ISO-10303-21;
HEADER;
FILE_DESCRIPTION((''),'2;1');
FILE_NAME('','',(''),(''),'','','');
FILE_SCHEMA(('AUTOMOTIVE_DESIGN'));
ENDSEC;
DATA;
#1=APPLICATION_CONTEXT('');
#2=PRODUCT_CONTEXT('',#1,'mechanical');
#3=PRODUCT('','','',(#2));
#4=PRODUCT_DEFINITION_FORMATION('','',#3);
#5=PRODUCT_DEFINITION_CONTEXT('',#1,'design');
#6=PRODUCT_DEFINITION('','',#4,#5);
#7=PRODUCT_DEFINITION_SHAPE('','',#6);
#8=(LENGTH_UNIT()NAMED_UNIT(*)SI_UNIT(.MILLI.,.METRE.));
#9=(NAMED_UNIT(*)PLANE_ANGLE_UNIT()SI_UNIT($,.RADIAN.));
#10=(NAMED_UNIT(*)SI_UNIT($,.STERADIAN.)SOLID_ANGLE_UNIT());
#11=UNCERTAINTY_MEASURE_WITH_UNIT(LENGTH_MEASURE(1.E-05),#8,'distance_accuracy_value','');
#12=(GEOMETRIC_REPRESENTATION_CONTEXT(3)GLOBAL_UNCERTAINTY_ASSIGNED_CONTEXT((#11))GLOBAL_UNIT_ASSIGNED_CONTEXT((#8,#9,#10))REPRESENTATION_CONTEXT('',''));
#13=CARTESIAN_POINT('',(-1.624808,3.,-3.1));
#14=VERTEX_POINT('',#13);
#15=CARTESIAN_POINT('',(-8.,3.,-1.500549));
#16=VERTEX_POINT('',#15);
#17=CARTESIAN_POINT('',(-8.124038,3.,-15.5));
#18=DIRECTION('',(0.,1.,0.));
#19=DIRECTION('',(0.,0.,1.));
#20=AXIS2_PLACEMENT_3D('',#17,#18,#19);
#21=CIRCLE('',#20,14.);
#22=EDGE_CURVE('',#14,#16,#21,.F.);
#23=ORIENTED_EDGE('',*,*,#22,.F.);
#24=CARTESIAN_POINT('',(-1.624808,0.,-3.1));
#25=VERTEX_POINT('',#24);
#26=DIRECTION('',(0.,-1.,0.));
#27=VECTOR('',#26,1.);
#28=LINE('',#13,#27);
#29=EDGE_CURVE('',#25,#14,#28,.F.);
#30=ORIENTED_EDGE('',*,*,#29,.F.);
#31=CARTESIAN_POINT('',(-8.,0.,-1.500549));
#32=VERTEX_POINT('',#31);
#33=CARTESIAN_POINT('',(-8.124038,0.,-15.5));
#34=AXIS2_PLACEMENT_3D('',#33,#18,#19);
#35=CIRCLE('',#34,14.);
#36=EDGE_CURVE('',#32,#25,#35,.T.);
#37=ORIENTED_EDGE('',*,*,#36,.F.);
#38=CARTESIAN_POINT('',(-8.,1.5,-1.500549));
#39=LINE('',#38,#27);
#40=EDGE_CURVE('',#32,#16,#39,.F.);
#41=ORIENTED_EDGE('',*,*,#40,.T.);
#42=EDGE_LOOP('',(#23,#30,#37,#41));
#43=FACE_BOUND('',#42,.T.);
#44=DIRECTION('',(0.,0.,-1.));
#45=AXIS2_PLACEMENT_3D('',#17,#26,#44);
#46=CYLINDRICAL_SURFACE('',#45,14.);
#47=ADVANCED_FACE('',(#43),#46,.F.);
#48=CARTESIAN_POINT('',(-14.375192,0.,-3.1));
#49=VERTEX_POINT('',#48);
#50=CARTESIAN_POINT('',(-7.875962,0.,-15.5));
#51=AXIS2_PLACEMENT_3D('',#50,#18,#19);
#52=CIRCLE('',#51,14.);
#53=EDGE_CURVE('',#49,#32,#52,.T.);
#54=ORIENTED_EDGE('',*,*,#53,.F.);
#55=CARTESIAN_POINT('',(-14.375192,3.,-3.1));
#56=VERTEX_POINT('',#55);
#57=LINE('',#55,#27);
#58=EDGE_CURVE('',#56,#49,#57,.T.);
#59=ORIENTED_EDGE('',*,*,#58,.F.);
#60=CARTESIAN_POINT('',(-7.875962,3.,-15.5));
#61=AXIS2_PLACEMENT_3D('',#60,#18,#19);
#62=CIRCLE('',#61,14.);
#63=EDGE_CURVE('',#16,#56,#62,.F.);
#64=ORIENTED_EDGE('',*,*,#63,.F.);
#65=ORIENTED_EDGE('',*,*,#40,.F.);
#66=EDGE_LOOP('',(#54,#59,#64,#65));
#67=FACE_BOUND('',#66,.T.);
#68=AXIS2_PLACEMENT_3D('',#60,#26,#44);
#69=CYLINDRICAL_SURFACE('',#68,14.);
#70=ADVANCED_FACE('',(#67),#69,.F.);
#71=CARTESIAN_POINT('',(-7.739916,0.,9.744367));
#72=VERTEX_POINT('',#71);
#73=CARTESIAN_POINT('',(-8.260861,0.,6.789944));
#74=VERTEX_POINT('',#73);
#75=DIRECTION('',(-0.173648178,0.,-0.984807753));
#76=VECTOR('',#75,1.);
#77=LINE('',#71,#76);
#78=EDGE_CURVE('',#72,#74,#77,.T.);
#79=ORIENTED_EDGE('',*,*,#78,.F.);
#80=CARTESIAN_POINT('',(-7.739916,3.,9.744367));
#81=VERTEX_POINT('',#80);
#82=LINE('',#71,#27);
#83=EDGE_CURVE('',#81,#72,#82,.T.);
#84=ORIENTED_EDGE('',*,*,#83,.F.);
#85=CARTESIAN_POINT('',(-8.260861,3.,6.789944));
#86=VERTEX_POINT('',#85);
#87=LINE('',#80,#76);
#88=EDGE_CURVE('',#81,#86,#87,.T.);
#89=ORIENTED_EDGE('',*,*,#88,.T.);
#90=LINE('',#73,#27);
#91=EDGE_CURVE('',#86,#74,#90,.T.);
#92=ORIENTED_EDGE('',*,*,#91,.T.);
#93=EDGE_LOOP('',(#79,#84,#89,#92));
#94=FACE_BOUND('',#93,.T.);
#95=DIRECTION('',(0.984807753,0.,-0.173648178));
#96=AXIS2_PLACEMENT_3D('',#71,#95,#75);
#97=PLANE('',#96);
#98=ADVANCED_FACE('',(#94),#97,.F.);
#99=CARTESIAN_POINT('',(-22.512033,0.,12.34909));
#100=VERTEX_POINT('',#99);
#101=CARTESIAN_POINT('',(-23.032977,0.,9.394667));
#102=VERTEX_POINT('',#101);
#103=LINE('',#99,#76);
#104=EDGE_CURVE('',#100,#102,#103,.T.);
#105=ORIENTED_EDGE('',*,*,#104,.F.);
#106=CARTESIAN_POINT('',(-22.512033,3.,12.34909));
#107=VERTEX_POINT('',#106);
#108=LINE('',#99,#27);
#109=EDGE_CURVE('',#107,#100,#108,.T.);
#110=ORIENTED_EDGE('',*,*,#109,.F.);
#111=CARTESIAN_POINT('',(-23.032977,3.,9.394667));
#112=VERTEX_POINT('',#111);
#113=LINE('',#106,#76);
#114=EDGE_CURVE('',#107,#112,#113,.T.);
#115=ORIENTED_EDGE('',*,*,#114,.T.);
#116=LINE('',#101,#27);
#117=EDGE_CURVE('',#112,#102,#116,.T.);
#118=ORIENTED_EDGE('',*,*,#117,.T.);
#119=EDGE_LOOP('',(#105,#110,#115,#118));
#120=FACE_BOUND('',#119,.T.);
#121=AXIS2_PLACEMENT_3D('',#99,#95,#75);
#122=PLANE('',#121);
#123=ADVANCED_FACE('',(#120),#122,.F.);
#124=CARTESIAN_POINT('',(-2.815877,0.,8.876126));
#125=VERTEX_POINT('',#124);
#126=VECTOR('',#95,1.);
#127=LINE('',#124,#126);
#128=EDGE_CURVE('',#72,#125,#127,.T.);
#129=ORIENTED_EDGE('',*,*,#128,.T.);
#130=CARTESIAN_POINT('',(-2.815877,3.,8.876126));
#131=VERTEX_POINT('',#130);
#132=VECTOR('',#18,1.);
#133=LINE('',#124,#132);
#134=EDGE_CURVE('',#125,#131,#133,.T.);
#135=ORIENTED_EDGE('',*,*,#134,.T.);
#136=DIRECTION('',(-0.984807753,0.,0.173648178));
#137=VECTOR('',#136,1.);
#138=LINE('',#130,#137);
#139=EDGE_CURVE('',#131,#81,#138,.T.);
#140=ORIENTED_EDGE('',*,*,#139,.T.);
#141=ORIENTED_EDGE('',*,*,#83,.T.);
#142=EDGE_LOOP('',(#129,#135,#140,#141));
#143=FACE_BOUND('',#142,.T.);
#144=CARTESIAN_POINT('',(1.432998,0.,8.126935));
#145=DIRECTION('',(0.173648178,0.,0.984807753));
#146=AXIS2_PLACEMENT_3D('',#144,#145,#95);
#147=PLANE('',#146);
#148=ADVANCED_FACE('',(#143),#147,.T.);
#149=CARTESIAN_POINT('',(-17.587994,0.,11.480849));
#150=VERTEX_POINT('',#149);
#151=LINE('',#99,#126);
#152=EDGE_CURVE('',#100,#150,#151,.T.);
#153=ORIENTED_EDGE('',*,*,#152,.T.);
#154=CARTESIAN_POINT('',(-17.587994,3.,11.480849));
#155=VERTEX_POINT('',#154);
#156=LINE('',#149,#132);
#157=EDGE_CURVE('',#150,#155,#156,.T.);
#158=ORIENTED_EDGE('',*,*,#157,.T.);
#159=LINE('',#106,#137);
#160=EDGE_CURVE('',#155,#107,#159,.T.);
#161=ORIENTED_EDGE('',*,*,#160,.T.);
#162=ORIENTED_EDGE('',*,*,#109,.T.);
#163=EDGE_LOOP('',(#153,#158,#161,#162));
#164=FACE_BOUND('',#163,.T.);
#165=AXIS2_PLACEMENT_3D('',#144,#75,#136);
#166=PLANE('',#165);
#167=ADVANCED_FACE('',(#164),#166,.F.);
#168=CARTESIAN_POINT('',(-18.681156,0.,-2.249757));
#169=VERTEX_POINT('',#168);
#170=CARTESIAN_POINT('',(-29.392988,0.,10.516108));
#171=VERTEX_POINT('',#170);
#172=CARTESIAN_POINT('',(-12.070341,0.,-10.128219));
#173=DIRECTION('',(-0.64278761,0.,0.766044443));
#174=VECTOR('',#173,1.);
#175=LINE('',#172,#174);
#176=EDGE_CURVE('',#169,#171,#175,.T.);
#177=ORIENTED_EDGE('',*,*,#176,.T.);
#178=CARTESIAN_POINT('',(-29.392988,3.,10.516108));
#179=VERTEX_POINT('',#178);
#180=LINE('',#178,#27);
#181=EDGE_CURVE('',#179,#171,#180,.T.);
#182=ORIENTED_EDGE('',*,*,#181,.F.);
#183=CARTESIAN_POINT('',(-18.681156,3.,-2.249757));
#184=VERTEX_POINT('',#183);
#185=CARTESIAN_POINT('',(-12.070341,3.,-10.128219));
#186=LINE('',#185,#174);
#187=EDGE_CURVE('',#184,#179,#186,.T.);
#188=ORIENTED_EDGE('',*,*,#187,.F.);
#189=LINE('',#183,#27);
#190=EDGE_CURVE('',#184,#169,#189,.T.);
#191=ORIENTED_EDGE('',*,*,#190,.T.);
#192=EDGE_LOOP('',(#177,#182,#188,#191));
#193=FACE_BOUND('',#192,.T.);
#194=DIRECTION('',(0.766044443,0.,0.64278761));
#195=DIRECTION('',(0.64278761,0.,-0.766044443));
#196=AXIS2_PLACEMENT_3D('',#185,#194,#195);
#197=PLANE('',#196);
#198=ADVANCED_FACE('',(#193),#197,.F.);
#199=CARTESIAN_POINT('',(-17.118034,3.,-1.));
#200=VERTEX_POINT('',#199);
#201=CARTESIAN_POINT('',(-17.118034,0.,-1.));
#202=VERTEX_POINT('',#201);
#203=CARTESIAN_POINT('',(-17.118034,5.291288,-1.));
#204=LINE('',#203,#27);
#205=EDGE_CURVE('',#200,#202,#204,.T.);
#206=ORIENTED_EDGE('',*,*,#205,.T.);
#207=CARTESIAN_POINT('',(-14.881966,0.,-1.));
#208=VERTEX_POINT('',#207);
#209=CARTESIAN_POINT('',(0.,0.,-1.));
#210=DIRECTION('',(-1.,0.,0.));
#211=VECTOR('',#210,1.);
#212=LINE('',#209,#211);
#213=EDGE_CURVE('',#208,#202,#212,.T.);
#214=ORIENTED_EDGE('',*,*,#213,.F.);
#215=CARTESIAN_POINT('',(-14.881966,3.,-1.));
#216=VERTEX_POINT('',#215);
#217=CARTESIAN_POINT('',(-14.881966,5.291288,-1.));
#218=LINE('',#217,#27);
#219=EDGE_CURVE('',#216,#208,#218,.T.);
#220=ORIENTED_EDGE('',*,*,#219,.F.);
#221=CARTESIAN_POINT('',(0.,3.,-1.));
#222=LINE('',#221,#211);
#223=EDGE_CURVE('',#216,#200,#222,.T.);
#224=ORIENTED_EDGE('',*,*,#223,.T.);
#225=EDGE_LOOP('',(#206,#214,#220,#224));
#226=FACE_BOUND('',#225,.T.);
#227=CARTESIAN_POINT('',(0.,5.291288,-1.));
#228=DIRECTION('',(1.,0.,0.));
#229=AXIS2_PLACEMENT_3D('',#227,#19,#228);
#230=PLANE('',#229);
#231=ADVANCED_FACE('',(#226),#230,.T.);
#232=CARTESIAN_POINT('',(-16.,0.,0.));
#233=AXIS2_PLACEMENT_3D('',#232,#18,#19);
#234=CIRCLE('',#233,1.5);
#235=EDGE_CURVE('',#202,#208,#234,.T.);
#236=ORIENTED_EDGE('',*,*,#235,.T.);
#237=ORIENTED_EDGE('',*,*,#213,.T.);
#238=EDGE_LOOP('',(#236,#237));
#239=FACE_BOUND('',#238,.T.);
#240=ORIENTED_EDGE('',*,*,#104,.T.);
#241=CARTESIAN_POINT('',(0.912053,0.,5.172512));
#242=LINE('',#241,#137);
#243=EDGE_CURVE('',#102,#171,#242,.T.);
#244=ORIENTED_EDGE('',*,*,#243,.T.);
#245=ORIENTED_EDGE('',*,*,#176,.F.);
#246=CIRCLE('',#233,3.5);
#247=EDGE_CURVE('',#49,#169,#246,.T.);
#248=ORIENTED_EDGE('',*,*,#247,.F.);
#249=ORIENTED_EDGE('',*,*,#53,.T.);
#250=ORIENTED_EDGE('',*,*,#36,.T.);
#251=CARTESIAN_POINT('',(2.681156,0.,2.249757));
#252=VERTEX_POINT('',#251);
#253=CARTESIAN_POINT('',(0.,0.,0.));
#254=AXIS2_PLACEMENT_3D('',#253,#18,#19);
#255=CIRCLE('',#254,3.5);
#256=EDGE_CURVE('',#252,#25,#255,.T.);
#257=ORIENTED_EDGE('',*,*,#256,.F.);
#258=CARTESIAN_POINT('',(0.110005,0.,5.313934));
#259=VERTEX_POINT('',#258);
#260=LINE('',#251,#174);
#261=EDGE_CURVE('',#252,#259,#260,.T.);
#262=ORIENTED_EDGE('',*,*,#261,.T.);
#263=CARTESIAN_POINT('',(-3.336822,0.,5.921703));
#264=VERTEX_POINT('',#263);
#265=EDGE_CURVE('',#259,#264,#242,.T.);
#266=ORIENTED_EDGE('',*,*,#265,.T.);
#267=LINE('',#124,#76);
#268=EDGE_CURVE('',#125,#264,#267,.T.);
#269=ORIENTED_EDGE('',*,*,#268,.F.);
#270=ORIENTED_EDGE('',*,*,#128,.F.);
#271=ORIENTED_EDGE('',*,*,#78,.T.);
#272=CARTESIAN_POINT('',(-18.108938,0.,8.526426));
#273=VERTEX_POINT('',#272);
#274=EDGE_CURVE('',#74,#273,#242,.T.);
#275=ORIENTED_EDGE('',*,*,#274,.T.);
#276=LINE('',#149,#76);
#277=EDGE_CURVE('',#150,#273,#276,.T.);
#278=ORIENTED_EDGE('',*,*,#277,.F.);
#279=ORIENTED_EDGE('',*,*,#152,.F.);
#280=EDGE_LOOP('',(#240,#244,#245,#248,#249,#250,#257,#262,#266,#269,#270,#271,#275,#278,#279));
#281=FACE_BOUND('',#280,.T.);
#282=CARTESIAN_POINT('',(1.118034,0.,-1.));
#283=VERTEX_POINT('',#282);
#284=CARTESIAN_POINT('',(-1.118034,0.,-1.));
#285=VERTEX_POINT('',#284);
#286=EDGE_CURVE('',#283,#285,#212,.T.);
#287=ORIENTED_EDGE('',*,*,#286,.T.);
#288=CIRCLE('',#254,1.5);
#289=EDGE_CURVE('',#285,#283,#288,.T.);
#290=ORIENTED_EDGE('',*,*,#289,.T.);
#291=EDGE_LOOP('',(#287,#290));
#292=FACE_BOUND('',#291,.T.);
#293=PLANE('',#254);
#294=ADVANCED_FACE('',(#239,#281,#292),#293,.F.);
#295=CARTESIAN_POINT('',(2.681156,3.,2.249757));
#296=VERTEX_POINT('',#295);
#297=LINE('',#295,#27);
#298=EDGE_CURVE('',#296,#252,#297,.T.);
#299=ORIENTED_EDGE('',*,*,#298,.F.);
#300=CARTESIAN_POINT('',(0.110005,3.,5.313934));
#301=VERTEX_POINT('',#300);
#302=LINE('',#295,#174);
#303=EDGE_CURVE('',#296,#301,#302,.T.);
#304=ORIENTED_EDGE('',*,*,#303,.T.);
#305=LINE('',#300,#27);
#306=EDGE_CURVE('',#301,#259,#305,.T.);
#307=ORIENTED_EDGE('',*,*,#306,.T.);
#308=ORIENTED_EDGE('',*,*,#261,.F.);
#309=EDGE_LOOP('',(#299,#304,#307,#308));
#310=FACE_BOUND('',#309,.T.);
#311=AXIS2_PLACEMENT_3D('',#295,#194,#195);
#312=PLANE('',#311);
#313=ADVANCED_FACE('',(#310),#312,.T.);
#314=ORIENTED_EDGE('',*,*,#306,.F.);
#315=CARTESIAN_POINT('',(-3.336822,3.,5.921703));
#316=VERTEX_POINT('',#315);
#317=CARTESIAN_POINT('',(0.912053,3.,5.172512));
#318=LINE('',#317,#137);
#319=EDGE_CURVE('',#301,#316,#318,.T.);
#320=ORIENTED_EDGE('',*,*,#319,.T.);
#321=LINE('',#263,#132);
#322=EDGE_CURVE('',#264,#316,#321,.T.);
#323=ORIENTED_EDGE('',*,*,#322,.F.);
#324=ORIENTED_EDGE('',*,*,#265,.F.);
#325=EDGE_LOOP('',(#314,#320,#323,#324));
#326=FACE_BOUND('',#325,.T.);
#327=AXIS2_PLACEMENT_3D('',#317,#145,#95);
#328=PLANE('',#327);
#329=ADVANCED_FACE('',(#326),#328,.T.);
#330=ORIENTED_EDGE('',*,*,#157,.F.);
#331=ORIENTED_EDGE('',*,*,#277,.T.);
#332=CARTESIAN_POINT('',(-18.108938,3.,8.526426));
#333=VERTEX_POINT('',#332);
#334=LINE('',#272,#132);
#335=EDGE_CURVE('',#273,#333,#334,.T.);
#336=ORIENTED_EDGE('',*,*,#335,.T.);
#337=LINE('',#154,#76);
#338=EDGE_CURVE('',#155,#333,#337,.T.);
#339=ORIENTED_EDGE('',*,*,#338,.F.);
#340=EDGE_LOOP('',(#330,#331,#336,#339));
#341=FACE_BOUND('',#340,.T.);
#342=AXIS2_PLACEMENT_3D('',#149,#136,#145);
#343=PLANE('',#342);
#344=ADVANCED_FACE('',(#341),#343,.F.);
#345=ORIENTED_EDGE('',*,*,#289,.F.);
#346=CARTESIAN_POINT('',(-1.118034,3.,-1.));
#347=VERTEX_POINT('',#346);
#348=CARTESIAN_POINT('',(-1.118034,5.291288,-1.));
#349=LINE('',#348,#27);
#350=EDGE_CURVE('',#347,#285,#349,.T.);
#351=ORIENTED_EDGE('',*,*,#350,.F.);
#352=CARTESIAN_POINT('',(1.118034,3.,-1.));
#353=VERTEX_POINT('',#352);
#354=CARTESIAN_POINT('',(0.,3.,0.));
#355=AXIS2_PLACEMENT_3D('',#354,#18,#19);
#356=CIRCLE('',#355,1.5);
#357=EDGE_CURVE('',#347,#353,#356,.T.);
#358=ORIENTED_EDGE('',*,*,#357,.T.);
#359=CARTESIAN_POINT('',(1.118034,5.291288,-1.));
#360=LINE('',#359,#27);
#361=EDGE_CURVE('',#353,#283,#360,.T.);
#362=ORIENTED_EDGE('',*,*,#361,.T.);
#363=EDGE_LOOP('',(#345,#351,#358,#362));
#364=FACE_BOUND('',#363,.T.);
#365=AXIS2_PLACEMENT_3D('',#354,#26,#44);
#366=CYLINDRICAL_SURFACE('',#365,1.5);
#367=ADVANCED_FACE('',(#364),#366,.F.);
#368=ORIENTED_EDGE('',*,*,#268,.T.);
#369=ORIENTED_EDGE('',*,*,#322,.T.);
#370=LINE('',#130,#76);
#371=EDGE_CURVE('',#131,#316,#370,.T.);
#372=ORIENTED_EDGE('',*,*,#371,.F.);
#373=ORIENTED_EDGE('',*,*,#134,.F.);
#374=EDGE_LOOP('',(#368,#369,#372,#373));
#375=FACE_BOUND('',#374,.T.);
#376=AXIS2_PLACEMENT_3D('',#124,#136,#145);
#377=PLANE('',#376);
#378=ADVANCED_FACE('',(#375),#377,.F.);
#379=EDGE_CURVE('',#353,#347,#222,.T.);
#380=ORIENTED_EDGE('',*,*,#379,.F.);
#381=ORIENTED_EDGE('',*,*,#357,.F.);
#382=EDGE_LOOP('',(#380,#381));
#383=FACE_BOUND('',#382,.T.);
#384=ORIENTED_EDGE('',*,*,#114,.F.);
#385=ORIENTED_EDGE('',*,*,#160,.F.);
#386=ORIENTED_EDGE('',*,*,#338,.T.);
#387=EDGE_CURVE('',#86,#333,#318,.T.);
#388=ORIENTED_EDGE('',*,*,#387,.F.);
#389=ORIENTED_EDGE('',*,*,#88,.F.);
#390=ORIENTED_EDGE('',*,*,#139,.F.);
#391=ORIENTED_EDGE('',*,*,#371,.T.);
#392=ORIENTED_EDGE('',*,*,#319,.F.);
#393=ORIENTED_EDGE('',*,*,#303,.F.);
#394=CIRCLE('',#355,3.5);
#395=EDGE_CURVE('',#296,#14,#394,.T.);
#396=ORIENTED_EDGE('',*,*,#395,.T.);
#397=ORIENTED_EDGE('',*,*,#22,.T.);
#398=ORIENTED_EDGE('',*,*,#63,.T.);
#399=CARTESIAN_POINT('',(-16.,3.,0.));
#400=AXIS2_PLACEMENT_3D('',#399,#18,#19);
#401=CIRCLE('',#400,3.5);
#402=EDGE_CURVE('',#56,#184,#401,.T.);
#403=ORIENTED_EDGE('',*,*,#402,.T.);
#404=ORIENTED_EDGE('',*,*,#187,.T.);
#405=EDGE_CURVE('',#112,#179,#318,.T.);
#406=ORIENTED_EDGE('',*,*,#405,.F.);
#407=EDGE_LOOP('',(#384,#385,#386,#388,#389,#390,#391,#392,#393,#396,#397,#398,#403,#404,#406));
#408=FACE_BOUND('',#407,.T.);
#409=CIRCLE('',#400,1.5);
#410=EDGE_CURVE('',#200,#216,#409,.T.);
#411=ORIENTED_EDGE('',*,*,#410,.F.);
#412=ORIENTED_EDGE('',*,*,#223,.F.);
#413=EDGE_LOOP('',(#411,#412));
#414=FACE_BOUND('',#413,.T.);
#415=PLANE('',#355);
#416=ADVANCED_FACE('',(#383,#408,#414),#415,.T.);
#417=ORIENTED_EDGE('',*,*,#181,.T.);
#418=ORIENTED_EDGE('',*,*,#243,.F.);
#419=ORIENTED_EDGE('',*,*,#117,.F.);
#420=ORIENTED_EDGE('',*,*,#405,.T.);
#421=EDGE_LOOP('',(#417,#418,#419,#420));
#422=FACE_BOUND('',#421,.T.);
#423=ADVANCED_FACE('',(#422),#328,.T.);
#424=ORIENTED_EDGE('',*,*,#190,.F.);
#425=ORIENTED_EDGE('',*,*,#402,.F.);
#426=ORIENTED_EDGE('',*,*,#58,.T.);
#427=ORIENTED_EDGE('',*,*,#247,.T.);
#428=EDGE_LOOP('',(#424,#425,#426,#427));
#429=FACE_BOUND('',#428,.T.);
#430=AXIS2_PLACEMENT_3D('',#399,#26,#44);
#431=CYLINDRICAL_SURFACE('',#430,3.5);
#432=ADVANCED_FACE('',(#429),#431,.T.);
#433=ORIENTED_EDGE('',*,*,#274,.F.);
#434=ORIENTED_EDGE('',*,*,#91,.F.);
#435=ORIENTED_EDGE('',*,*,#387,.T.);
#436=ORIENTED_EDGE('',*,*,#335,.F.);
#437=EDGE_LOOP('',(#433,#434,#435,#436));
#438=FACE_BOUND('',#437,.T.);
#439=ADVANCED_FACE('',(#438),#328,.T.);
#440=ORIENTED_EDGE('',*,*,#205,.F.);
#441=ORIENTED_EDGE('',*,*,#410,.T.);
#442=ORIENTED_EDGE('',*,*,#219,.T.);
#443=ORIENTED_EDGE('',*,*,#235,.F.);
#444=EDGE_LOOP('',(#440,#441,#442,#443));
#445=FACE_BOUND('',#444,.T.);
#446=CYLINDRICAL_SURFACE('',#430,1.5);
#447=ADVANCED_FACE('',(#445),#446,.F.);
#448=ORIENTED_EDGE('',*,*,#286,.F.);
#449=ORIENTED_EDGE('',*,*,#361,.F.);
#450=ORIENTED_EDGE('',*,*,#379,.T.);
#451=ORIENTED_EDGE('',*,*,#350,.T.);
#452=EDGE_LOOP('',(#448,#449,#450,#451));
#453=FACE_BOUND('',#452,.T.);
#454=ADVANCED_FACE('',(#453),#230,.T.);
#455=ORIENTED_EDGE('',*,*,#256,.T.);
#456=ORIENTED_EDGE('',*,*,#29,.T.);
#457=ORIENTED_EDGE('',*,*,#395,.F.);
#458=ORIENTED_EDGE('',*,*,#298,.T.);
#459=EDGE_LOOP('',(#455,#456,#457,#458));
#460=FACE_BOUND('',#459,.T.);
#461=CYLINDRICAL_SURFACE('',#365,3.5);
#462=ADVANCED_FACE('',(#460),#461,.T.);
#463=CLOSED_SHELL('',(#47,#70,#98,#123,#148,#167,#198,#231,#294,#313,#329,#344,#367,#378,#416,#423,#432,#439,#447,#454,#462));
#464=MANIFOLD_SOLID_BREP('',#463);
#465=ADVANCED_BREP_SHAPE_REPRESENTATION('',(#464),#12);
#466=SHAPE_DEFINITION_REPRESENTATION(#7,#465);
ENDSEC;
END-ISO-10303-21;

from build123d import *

# Parameters (mm, degrees)
SKETCH_2_R      = 3.5
SKETCH_2_R_2    = 1.5
EXTRUDE_1_DEPTH = 3
FILLET_1_R      = 14
SKETCH_3_W      = 5
SKETCH_3_H      = 3
EXTRUDE_2_DEPTH = 3
EXTRUDE_4_DEPTH = 3


with BuildPart() as part:
    # 草图2 → 凸台-拉伸1 (new body)
    # profile 1 of 3: a face of its own
    with BuildSketch(Plane(origin=(0, 0, 0), x_dir=(1, 0, 0), z_dir=(0, 1, 0))):
        with Locations((-16, 0)):
            Circle(SKETCH_2_R)
        with Locations(Location((-16, 0, 0), (0, 0, 270))):
            Circle(SKETCH_2_R_2, mode=Mode.SUBTRACT)
    # profile 2 of 3: a face of its own
    with BuildSketch(Plane(origin=(0, 0, 0), x_dir=(1, 0, 0), z_dir=(0, 1, 0))):
        Circle(SKETCH_2_R)
        with Locations(Location((0, 0, 0), (0, 0, 270))):
            Circle(SKETCH_2_R_2, mode=Mode.SUBTRACT)
    # profile 3 of 3: a face of its own
    with BuildSketch(Plane(origin=(0, 0, 0), x_dir=(1, 0, 0), z_dir=(0, 1, 0))):
        with BuildLine():
            Line((-3.16227766, 1.5), (-12.83772234, 1.5))
            ThreePointArc((-12.83772234, 1.5), (-12.585474278, 0.768774411), (-12.5, 0))
            ThreePointArc((-12.5, 0), (-17.197070502, -3.288924173), (-18.681155551, 2.249756634))
            Line((-18.681155551, 2.249756634), (-29.392987934, -10.516108092))
            Line((-29.392987934, -10.516108092), (0.110005112, -5.313934406))
            Line((0.110005112, -5.313934406), (2.681155551, -2.249756634))
            ThreePointArc((2.681155551, -2.249756634), (-1.890248218, -2.94566829), (-3.16227766, 1.5))
        make_face()
    extrude(amount=EXTRUDE_1_DEPTH)

    # 圆角1
    # the kernel refuses this fillet: 14 mm, written as the material it adds along each edge
    with BuildSketch(Plane(origin=(-3.16227766, 0, -1.5), x_dir=(-1, 0, 0), z_dir=(0, 1, 0))) as fillet_1_piece_1:
        with BuildLine():
            CenterArc((4.961760744, -14), FILLET_1_R, 90, 27.660449899)
            ThreePointArc((-1.537469979, -1.6), (-0.638580667, -0.925067728), (0, 0))
            Line((0, 0), (4.961760744, 0))
        make_face()
    extrude(amount=3)
    with BuildSketch(Plane(origin=(-12.83772234, 0, -1.5), x_dir=(-0.6928764936482941, 0, -0.721056283898591), z_dir=(0, 1, 0))) as fillet_1_piece_2:
        with BuildLine():
            CenterArc((6.656900588, -13.277979675), FILLET_1_R, 108.481308288, 27.660449899)
            Line((-3.437887387, -3.577708764), (0, 0))
            ThreePointArc((0, 0), (1.109483431, -0.180505081), (2.218966863, 0))
        make_face()
    extrude(amount=3)

    # 草图3 → 凸台-拉伸2 (add)
    with BuildSketch(Plane(origin=(0.912053364, 0, 5.17251166), x_dir=(0.9848077530122087, 0, -0.17364817766692722), z_dir=(0.17364817766692722, 0, 0.9848077530122087))):
        with Locations((-21.814421139, 1.5)):
            Rectangle(SKETCH_3_W, SKETCH_3_H)
        with Locations((-6.814421139, 1.5)):
            Rectangle(SKETCH_3_W, SKETCH_3_H)
    extrude(amount=EXTRUDE_2_DEPTH)

    # 草图5 → 凸台-拉伸4 (add)
    with BuildSketch(Plane.XZ):
        with BuildLine():
            ThreePointArc((-1.118033989, -1), (0, -1.5), (1.118033989, -1))
            Line((1.118033989, -1), (-1.118033989, -1))
        make_face()
        with BuildLine():
            ThreePointArc((-17.118033989, -1), (-16, -1.5), (-14.881966011, -1))
            Line((-14.881966011, -1), (-17.118033989, -1))
        make_face()
    extrude(amount=-EXTRUDE_4_DEPTH)


solid = part.part
